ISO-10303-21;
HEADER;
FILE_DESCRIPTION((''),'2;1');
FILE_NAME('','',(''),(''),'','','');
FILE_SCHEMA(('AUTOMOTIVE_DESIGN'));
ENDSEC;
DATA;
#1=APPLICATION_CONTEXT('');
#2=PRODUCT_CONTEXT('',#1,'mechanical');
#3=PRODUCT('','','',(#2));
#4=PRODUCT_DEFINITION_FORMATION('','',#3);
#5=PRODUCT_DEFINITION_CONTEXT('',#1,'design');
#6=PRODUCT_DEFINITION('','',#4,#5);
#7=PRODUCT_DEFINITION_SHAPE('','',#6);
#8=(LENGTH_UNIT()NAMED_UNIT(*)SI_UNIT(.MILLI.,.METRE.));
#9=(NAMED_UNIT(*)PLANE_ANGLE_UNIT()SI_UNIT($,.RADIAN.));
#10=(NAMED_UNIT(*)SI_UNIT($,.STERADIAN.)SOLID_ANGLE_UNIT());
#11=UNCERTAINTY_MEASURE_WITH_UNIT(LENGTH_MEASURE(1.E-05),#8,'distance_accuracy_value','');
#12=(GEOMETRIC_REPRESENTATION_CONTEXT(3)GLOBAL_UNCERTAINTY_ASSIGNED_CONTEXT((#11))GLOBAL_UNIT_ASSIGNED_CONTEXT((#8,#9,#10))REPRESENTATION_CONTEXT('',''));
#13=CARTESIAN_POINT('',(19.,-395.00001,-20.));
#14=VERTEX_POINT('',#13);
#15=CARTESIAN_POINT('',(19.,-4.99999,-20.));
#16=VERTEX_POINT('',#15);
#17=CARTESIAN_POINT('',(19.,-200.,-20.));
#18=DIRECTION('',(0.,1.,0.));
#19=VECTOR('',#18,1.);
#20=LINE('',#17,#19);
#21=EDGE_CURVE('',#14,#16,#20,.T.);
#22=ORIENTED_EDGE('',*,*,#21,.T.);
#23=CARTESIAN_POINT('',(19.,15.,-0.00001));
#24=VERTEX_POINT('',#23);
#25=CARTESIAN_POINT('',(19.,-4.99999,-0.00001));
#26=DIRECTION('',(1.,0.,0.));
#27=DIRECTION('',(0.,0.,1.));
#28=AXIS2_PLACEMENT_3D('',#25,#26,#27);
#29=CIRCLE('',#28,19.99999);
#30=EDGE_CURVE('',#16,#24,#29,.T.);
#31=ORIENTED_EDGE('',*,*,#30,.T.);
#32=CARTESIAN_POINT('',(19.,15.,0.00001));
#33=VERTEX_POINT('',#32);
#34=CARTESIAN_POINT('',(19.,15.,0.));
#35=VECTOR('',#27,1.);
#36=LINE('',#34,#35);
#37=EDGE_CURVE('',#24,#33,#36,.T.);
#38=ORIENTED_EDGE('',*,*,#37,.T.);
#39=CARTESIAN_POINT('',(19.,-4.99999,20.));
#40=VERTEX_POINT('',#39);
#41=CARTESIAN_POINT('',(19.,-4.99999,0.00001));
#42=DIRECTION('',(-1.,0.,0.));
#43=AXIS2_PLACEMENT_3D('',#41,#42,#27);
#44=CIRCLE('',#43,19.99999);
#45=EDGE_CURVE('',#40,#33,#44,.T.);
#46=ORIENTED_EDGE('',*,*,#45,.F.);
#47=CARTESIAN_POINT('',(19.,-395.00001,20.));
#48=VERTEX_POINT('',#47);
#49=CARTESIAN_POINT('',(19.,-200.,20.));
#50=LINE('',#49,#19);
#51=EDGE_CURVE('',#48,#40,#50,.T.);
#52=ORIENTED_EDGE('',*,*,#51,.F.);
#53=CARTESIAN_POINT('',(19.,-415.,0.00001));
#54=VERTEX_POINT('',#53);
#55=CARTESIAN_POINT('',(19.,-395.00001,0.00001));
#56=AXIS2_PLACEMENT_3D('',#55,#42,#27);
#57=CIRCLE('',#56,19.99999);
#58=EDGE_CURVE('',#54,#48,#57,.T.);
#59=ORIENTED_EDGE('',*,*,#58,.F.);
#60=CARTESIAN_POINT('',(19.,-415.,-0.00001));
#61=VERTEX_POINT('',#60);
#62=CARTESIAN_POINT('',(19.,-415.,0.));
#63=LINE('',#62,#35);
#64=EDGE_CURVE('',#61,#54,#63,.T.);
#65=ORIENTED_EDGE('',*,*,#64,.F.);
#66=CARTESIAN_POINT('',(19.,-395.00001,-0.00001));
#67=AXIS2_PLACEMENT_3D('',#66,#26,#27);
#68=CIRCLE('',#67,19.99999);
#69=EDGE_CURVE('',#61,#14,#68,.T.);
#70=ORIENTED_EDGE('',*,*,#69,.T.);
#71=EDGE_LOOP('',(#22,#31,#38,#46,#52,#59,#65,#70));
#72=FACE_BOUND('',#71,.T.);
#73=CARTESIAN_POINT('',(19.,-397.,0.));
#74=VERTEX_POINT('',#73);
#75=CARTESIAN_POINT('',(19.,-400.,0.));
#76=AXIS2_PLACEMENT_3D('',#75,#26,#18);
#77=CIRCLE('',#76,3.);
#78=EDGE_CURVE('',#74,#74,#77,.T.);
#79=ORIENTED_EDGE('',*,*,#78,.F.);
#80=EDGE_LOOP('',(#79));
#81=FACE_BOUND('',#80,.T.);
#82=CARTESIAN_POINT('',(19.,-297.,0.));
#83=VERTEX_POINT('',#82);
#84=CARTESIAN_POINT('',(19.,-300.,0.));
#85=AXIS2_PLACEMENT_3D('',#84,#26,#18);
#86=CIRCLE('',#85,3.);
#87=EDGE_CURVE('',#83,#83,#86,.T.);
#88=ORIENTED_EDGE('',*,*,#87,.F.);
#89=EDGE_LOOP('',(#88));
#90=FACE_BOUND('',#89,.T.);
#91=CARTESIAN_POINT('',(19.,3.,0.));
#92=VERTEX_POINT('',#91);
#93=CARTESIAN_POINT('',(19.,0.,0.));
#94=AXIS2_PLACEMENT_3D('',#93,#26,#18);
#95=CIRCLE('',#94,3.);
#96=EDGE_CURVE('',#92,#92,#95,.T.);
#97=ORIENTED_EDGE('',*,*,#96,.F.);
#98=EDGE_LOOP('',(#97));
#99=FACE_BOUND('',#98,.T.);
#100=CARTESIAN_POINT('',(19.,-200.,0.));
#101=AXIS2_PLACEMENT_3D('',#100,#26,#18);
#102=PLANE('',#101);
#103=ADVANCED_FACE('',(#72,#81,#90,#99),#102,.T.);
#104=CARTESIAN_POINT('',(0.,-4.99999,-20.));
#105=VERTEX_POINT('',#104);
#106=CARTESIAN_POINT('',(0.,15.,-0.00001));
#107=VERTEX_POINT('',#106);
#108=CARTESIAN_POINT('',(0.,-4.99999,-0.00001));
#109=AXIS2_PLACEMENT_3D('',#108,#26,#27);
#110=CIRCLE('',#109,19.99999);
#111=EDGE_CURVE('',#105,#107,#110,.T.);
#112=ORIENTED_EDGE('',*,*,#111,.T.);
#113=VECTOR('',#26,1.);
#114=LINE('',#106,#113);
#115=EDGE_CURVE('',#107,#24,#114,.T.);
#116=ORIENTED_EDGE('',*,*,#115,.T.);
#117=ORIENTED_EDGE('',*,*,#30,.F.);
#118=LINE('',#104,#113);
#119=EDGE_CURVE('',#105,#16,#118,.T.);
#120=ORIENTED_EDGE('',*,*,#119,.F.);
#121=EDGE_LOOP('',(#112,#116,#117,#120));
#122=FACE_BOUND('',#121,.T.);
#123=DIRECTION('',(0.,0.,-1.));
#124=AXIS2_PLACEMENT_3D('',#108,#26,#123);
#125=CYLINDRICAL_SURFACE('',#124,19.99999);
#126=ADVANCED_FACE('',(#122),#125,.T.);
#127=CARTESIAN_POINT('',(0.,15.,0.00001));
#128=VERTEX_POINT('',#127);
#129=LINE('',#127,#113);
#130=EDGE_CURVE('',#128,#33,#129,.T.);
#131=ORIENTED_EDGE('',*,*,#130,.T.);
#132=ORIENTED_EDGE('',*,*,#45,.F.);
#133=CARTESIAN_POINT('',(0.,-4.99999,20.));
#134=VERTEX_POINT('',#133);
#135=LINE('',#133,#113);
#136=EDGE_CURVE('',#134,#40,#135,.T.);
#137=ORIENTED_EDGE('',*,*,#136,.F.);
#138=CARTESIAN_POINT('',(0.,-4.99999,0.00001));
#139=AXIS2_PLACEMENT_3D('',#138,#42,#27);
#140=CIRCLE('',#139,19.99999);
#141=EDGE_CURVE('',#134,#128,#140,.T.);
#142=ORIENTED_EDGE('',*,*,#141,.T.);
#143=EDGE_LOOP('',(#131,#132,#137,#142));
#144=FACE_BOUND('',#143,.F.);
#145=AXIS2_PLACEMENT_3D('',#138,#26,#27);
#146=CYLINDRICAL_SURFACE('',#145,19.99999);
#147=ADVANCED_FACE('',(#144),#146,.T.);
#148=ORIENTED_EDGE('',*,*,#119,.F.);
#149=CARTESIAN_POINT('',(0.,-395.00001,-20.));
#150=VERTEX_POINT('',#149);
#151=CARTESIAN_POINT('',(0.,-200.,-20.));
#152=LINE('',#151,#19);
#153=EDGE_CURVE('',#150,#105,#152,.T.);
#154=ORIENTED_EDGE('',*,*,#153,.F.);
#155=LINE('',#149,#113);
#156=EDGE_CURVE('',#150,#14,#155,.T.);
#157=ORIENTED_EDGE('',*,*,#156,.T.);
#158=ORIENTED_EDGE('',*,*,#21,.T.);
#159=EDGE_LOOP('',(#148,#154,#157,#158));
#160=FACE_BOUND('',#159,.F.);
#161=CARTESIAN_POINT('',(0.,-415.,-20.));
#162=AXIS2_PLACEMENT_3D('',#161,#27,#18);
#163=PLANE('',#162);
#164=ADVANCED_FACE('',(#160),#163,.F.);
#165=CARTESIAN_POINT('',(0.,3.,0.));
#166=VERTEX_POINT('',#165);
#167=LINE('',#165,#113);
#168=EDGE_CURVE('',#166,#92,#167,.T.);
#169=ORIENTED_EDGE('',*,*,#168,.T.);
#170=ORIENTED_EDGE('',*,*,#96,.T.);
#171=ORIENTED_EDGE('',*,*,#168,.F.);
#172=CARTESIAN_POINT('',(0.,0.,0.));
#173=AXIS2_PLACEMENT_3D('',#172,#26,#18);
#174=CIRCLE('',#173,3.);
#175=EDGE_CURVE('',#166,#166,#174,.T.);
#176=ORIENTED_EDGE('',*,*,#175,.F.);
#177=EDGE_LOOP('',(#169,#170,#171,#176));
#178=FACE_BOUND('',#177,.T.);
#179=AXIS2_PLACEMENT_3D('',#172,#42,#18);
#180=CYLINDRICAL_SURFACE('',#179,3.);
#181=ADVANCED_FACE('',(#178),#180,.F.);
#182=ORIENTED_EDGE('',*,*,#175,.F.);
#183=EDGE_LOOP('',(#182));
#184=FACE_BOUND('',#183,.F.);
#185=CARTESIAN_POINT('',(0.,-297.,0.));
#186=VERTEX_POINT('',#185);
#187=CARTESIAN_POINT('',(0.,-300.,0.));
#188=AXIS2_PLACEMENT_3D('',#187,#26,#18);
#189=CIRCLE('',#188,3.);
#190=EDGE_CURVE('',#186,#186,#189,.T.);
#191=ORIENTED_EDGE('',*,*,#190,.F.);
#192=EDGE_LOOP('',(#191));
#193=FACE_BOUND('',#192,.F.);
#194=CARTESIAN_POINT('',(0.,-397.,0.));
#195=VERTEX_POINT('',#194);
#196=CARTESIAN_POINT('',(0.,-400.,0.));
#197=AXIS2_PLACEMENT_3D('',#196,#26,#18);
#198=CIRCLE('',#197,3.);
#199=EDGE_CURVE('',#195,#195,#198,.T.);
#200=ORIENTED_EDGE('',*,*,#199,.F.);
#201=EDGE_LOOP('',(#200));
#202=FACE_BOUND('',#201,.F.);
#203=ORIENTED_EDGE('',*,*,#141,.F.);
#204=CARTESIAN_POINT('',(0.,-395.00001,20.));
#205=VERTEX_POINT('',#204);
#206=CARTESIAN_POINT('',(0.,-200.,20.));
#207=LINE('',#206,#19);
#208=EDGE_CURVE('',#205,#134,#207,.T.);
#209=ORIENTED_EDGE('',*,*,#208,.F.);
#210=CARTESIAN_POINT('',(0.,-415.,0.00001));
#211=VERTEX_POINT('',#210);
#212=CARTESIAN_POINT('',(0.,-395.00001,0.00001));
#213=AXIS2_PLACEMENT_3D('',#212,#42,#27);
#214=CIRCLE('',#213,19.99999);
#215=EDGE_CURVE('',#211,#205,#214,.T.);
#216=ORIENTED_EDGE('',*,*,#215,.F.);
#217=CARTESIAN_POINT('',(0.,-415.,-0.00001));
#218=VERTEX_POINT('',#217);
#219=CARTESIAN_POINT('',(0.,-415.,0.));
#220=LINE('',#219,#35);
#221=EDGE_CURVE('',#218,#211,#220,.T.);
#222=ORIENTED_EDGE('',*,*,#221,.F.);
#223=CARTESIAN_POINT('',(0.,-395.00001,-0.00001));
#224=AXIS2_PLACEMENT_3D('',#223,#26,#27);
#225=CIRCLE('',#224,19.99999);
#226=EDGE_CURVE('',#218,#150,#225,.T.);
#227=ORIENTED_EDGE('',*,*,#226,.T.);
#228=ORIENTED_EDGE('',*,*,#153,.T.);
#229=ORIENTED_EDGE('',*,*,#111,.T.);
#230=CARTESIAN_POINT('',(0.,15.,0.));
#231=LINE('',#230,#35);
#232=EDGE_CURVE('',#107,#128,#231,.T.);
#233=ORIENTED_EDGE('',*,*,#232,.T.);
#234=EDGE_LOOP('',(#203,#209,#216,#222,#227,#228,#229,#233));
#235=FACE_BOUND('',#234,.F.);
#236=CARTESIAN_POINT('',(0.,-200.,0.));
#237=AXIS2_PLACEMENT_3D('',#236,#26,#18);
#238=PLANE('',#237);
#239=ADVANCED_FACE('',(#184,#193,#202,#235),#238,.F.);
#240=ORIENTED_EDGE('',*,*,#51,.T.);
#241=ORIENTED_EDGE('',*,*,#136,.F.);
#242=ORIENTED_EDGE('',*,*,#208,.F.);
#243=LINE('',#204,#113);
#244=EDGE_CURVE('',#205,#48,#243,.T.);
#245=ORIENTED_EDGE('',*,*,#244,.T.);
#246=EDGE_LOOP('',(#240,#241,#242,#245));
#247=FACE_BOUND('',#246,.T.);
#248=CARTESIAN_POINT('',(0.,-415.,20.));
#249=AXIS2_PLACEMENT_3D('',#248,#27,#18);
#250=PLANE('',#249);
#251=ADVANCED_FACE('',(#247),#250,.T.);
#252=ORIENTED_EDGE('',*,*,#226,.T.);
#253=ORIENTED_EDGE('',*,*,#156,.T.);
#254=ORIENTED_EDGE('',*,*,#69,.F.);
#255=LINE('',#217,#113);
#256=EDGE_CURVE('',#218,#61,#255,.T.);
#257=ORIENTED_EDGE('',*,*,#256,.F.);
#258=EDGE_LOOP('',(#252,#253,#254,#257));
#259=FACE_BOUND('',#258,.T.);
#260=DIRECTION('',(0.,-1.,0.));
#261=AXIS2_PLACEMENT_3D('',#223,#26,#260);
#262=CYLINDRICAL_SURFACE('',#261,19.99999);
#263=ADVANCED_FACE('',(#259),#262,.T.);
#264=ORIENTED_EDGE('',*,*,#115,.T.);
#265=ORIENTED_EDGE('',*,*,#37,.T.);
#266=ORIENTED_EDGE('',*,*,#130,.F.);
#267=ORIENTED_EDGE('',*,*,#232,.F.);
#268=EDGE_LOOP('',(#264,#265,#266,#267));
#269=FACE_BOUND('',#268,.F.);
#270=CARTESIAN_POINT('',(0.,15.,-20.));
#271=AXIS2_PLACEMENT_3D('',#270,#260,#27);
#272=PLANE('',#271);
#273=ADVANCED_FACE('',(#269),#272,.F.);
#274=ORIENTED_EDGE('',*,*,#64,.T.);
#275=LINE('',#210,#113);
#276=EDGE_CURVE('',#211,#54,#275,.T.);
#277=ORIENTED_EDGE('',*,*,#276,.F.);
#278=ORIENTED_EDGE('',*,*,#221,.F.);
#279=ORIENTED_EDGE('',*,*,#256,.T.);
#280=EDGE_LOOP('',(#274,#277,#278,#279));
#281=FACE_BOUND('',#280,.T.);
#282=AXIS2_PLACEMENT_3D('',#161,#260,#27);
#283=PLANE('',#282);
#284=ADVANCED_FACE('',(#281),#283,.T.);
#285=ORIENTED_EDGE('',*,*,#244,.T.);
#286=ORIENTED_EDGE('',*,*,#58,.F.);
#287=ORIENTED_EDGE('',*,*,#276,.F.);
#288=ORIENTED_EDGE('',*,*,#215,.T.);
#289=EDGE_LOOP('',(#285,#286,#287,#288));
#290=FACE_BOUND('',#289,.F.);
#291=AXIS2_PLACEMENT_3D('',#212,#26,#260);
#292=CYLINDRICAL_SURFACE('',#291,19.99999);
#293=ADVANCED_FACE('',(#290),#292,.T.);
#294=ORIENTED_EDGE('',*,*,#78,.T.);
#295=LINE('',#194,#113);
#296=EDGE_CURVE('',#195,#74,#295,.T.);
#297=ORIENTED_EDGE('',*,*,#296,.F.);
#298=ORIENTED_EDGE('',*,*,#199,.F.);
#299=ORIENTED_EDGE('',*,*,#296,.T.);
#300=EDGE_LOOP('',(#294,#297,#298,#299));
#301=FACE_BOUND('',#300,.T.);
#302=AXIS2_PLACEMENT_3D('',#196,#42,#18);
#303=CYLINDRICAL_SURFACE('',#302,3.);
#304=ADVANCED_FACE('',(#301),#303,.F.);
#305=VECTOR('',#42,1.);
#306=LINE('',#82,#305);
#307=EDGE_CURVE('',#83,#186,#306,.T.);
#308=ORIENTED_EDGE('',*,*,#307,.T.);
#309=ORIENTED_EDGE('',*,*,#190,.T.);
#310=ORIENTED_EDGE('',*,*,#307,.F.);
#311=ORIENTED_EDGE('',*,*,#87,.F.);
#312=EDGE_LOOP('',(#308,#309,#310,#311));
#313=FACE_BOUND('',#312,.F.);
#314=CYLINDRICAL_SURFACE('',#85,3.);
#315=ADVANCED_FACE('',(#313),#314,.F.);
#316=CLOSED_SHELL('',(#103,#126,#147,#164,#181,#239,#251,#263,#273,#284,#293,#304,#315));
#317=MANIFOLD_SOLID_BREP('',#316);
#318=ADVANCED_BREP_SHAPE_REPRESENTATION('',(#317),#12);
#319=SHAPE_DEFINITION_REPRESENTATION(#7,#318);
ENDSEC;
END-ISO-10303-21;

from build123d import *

# Parameters (mm, degrees)
F0_W     = 430
F0_H     = 40
F0_R     = 3
F1_DEPTH = 19
F2_R     = 19.99999
F3_R     = 3
F4_DEPTH = 19.001


# Not quite as in the source:
# - a fillet or chamfer is up to 0.001 mm smaller than in the source, because OpenCascade refuses the exact size


with BuildPart() as f1:
    # F0 (on Right) → F1 (new body)
    with BuildSketch(Plane.YZ):
        with Locations((-200, 0)):
            Rectangle(F0_W, F0_H)
        with Locations((-400, 0)):
            Circle(F0_R, mode=Mode.SUBTRACT)
        Circle(F0_R, mode=Mode.SUBTRACT)
    extrude(amount=F1_DEPTH)

    # F2 (radius 20 in the source; OpenCascade refuses exactly that, so slightly less here)
    f2_edges = [f1.edges().sort_by_distance(p)[0] for p in [
        (9.5, 15, 20),
        (9.5, 15, -20),
        (9.5, -415, 20),
        (9.5, -415, -20),
    ]]
    fillet(f2_edges, radius=F2_R)

    # F3 (on face) → F4 (cut, through all)
    with BuildSketch(Plane.YZ.offset(19)):
        with Locations((-300, 0)):
            Circle(F3_R)
    extrude(amount=-F4_DEPTH, mode=Mode.SUBTRACT)


solid = f1.part
